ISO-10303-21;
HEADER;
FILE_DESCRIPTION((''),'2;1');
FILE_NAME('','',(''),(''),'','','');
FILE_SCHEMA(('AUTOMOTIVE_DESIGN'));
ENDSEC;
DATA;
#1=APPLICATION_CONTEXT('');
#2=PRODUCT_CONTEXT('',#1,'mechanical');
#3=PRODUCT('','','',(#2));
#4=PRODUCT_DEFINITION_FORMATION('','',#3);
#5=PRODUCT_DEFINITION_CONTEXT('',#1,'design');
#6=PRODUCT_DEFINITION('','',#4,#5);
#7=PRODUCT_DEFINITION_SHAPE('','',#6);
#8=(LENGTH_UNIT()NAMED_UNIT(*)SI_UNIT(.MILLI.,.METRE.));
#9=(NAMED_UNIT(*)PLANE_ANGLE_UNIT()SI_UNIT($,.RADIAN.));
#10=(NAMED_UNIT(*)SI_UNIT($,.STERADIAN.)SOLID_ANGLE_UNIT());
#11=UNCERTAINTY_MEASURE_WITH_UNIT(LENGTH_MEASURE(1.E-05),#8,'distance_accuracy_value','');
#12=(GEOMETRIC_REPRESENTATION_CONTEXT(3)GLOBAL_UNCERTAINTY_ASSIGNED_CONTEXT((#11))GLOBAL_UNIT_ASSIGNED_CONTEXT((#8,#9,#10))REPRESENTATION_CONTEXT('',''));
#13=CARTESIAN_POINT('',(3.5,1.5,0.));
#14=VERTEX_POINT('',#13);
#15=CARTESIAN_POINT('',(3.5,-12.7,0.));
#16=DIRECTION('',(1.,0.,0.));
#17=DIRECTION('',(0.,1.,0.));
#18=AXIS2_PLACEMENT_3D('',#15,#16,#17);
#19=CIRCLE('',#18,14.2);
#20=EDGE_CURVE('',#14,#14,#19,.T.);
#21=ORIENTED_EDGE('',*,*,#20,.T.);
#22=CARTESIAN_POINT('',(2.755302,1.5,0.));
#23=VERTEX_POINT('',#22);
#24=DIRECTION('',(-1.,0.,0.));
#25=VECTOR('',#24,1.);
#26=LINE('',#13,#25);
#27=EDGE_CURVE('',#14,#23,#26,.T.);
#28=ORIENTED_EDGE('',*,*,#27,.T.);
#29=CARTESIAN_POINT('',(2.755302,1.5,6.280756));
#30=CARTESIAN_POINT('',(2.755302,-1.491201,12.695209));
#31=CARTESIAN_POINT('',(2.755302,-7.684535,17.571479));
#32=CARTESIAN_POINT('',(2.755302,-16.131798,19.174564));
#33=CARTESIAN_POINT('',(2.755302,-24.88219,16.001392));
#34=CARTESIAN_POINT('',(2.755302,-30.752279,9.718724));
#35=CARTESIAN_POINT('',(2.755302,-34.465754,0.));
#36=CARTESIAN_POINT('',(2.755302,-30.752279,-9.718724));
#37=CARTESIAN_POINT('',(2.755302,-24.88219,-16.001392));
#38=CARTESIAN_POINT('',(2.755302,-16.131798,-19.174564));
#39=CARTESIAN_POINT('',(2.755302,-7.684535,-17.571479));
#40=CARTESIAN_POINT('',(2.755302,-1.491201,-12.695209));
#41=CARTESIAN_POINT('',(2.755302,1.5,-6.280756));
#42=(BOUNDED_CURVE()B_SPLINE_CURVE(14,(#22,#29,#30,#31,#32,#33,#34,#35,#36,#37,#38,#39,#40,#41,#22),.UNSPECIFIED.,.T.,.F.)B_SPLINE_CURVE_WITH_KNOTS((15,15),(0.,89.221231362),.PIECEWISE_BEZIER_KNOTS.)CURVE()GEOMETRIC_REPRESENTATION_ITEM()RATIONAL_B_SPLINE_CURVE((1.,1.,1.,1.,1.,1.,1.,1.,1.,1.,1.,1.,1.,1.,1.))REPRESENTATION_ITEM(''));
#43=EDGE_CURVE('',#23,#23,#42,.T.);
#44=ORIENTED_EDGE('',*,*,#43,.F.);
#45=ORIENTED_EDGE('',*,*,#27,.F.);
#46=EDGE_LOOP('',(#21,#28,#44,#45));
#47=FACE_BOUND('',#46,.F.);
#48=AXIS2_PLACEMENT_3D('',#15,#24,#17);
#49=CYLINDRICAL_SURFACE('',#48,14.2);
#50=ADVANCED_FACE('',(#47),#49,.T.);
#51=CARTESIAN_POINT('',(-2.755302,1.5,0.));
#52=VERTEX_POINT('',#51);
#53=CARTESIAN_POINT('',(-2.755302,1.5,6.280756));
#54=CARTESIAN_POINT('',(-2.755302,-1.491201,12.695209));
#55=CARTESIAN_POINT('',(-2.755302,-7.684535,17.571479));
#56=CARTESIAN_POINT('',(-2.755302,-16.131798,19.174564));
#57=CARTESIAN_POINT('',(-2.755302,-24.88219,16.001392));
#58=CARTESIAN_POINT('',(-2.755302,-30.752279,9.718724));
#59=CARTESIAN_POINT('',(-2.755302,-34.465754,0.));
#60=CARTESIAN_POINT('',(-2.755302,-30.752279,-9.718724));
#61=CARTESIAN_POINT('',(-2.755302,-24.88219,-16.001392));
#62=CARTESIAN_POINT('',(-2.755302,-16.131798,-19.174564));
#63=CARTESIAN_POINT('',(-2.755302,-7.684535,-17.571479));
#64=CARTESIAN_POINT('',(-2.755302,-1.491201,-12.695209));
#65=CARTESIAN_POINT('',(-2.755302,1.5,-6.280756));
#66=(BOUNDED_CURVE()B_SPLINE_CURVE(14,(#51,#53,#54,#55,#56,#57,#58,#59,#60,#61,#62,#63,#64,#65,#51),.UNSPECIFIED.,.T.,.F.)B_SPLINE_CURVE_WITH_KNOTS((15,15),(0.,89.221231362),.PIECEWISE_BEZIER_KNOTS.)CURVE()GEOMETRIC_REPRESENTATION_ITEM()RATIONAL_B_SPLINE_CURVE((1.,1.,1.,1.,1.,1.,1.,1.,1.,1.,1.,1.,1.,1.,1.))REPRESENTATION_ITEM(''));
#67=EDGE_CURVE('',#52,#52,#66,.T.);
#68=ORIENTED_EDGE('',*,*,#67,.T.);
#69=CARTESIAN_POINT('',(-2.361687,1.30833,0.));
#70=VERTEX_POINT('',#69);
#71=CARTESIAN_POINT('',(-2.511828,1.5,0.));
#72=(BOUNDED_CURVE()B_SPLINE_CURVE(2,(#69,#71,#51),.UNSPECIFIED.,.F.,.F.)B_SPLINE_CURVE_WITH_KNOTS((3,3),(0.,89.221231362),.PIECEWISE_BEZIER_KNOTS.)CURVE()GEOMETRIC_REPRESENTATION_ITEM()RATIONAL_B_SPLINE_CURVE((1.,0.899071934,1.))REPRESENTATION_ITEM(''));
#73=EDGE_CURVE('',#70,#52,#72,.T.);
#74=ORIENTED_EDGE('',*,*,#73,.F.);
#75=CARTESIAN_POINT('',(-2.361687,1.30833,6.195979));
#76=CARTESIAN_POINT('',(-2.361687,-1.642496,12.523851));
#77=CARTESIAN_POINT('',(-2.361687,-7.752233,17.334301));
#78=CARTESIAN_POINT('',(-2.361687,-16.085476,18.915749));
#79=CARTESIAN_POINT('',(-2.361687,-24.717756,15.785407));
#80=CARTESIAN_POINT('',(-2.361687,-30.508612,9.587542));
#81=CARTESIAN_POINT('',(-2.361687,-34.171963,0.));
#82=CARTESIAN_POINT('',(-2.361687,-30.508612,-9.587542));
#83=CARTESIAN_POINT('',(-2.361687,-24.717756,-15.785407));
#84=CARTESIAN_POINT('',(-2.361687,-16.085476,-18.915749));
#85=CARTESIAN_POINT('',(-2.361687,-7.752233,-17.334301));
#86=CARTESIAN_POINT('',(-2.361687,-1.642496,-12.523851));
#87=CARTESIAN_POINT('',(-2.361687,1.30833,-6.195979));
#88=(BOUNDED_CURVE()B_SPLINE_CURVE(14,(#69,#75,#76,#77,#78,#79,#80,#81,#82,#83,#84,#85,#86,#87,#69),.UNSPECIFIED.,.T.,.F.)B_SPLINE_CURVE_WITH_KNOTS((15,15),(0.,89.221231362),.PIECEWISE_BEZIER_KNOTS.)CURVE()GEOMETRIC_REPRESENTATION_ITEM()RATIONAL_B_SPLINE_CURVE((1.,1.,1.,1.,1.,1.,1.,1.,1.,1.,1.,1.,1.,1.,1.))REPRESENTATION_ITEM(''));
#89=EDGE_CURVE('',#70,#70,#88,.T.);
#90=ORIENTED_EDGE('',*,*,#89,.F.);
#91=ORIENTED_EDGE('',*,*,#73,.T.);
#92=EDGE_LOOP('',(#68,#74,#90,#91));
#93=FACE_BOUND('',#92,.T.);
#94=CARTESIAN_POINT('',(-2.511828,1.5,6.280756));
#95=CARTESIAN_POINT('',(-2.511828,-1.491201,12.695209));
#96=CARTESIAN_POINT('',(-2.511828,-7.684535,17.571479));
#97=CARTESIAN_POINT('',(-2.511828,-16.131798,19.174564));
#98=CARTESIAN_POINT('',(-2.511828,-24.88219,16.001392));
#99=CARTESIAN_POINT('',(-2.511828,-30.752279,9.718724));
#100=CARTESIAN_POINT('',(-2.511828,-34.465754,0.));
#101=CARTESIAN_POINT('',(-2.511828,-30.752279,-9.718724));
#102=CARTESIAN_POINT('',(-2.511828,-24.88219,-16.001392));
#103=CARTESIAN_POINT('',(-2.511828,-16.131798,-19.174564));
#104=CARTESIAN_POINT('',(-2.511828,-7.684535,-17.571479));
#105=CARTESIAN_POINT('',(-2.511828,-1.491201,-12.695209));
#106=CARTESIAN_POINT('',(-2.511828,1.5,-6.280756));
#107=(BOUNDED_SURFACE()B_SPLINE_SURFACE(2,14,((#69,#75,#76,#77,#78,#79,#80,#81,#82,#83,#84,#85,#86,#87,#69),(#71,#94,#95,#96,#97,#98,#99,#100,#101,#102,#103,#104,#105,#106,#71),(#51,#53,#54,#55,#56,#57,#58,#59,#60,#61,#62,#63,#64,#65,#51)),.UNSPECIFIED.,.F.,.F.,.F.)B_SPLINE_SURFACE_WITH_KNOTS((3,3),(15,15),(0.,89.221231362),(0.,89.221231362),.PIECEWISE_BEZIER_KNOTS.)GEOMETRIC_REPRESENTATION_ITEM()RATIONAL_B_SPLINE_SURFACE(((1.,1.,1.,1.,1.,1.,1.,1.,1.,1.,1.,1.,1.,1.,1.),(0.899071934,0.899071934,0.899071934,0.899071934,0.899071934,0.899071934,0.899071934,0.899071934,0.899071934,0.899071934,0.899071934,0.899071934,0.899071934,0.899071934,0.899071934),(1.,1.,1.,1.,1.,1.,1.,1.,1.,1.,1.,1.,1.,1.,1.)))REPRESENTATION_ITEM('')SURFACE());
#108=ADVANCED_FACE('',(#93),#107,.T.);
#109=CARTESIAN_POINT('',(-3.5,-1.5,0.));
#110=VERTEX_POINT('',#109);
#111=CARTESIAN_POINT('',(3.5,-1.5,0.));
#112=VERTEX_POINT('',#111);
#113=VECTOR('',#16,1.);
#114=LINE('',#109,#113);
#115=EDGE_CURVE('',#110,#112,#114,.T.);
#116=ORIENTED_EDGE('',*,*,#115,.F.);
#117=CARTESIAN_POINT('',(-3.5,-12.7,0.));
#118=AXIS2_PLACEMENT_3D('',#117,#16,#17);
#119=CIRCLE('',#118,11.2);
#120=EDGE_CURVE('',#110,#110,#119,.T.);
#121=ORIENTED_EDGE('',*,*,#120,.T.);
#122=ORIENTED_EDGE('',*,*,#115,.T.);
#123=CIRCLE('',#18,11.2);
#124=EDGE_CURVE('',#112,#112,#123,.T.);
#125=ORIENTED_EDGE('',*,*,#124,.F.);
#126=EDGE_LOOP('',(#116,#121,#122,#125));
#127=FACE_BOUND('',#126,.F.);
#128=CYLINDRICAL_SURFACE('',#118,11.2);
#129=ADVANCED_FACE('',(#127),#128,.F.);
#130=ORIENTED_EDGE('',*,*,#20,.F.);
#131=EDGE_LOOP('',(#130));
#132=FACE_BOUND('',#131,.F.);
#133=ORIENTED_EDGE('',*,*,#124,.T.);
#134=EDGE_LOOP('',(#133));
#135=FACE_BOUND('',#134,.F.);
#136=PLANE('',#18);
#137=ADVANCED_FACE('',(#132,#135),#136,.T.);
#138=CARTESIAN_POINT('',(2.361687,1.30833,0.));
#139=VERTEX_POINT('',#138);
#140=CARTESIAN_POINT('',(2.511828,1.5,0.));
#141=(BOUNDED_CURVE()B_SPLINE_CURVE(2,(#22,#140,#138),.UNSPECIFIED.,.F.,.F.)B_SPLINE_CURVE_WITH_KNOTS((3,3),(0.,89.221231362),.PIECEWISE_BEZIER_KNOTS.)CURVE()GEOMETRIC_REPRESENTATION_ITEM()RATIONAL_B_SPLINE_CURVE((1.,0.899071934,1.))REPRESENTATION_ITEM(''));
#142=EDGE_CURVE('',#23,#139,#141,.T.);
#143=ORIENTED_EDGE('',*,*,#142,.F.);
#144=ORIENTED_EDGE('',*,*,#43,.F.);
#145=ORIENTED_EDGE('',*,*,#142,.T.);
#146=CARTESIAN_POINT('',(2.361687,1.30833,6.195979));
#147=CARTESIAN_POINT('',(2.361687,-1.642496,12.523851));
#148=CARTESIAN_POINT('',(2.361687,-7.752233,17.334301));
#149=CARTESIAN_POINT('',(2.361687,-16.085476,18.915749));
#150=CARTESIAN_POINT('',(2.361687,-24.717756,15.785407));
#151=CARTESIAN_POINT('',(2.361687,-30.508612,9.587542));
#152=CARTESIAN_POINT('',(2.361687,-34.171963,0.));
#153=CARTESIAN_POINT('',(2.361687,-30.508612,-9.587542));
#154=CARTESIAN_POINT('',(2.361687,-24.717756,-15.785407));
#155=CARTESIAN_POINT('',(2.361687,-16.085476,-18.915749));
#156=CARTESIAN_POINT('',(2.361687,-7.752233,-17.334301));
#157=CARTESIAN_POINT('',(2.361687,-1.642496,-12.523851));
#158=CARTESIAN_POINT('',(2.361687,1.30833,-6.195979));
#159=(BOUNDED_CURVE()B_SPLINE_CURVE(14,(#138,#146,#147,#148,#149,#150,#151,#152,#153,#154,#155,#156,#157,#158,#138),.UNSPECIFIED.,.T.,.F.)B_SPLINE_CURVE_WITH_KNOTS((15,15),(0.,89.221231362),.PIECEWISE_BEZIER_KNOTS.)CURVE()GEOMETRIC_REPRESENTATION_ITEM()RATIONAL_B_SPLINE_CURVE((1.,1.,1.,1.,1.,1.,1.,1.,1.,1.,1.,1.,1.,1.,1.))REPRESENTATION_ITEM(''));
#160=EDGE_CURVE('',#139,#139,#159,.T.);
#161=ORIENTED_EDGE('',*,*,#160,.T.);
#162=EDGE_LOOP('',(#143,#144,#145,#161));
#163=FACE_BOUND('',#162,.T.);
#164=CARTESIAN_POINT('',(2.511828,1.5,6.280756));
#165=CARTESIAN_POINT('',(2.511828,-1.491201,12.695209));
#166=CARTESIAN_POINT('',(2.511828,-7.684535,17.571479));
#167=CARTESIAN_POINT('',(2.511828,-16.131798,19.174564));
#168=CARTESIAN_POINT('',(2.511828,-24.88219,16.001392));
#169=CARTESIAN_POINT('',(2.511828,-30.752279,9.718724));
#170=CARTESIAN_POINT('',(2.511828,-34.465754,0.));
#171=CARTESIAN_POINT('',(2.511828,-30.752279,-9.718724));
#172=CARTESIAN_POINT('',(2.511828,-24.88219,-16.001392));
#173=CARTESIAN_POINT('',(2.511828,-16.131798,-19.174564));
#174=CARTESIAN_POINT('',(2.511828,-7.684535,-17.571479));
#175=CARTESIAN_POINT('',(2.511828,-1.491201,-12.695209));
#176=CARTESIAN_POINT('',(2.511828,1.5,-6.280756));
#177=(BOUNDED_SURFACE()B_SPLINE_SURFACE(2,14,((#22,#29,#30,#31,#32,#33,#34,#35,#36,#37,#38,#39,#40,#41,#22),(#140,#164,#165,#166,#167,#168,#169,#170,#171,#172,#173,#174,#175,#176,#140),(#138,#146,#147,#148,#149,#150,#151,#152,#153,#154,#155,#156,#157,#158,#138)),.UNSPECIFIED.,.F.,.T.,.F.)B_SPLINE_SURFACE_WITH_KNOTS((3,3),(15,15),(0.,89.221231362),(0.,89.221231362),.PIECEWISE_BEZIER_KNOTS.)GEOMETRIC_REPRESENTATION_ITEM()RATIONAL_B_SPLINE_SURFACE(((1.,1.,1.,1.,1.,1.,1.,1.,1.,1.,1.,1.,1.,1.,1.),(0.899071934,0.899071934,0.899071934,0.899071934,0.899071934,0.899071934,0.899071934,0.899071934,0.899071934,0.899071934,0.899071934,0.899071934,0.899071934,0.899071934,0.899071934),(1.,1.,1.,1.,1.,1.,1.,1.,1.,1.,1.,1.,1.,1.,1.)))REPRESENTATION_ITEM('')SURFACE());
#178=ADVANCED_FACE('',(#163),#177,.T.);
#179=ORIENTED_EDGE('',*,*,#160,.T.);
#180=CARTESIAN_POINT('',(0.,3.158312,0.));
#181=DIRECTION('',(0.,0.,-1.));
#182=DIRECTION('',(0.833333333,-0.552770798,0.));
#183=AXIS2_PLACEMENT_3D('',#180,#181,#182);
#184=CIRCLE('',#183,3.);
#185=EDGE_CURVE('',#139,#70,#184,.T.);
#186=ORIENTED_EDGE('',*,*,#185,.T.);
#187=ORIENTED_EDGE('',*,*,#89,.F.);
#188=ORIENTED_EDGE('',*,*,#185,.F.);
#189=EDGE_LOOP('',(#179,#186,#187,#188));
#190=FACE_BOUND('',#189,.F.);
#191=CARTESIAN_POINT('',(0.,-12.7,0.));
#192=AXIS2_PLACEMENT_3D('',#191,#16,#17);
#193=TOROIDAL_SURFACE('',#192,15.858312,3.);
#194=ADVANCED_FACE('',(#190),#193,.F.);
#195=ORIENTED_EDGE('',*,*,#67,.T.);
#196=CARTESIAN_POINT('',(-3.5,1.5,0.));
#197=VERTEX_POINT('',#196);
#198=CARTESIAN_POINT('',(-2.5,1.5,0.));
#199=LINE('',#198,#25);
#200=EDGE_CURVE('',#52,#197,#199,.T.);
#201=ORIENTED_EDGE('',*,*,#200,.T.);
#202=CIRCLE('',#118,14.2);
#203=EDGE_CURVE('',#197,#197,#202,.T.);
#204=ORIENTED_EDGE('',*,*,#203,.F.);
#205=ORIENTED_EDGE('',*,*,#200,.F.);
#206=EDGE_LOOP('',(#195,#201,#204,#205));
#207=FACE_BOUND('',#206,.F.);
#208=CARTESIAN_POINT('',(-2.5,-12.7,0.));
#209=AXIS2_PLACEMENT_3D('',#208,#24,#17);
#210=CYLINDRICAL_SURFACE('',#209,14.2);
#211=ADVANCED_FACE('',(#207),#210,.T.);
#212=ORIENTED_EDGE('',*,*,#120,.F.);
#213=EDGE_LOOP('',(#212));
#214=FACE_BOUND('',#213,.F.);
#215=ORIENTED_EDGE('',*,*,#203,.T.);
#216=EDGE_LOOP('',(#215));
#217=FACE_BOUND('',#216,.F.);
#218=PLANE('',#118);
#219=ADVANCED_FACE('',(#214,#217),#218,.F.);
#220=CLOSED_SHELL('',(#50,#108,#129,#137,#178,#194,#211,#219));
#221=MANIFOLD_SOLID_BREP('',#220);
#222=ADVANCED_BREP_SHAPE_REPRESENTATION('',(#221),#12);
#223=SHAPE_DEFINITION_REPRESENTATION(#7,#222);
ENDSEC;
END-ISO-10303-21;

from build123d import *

# Parameters (mm, degrees)
F2_R = 0.5


with BuildPart() as f1:
    # F0 (on Top) → F1 (revolve)
    with BuildSketch(Plane.XY):
        with BuildLine():
            Line((-3.5, -1.5), (3.5, -1.5))
            Line((3.5, -1.5), (3.5, 1.5))
            Line((3.5, 1.5), (2.5, 1.5))
            ThreePointArc((2.5, 1.5), (0, 0.1583123952), (-2.5, 1.5))
            Line((-2.5, 1.5), (-3.5, 1.5))
            Line((-3.5, 1.5), (-3.5, -1.5))
        make_face()
    revolve(axis=Axis((0, -12.7, 0), (1, 0, 0)))

    # F2
    f2_edges = [f1.edges().sort_by_distance(p)[0] for p in [
        (-2.5, -26.9, 0),
        (2.5, -26.9, 0),
    ]]
    fillet(f2_edges, radius=F2_R)


solid = f1.part
